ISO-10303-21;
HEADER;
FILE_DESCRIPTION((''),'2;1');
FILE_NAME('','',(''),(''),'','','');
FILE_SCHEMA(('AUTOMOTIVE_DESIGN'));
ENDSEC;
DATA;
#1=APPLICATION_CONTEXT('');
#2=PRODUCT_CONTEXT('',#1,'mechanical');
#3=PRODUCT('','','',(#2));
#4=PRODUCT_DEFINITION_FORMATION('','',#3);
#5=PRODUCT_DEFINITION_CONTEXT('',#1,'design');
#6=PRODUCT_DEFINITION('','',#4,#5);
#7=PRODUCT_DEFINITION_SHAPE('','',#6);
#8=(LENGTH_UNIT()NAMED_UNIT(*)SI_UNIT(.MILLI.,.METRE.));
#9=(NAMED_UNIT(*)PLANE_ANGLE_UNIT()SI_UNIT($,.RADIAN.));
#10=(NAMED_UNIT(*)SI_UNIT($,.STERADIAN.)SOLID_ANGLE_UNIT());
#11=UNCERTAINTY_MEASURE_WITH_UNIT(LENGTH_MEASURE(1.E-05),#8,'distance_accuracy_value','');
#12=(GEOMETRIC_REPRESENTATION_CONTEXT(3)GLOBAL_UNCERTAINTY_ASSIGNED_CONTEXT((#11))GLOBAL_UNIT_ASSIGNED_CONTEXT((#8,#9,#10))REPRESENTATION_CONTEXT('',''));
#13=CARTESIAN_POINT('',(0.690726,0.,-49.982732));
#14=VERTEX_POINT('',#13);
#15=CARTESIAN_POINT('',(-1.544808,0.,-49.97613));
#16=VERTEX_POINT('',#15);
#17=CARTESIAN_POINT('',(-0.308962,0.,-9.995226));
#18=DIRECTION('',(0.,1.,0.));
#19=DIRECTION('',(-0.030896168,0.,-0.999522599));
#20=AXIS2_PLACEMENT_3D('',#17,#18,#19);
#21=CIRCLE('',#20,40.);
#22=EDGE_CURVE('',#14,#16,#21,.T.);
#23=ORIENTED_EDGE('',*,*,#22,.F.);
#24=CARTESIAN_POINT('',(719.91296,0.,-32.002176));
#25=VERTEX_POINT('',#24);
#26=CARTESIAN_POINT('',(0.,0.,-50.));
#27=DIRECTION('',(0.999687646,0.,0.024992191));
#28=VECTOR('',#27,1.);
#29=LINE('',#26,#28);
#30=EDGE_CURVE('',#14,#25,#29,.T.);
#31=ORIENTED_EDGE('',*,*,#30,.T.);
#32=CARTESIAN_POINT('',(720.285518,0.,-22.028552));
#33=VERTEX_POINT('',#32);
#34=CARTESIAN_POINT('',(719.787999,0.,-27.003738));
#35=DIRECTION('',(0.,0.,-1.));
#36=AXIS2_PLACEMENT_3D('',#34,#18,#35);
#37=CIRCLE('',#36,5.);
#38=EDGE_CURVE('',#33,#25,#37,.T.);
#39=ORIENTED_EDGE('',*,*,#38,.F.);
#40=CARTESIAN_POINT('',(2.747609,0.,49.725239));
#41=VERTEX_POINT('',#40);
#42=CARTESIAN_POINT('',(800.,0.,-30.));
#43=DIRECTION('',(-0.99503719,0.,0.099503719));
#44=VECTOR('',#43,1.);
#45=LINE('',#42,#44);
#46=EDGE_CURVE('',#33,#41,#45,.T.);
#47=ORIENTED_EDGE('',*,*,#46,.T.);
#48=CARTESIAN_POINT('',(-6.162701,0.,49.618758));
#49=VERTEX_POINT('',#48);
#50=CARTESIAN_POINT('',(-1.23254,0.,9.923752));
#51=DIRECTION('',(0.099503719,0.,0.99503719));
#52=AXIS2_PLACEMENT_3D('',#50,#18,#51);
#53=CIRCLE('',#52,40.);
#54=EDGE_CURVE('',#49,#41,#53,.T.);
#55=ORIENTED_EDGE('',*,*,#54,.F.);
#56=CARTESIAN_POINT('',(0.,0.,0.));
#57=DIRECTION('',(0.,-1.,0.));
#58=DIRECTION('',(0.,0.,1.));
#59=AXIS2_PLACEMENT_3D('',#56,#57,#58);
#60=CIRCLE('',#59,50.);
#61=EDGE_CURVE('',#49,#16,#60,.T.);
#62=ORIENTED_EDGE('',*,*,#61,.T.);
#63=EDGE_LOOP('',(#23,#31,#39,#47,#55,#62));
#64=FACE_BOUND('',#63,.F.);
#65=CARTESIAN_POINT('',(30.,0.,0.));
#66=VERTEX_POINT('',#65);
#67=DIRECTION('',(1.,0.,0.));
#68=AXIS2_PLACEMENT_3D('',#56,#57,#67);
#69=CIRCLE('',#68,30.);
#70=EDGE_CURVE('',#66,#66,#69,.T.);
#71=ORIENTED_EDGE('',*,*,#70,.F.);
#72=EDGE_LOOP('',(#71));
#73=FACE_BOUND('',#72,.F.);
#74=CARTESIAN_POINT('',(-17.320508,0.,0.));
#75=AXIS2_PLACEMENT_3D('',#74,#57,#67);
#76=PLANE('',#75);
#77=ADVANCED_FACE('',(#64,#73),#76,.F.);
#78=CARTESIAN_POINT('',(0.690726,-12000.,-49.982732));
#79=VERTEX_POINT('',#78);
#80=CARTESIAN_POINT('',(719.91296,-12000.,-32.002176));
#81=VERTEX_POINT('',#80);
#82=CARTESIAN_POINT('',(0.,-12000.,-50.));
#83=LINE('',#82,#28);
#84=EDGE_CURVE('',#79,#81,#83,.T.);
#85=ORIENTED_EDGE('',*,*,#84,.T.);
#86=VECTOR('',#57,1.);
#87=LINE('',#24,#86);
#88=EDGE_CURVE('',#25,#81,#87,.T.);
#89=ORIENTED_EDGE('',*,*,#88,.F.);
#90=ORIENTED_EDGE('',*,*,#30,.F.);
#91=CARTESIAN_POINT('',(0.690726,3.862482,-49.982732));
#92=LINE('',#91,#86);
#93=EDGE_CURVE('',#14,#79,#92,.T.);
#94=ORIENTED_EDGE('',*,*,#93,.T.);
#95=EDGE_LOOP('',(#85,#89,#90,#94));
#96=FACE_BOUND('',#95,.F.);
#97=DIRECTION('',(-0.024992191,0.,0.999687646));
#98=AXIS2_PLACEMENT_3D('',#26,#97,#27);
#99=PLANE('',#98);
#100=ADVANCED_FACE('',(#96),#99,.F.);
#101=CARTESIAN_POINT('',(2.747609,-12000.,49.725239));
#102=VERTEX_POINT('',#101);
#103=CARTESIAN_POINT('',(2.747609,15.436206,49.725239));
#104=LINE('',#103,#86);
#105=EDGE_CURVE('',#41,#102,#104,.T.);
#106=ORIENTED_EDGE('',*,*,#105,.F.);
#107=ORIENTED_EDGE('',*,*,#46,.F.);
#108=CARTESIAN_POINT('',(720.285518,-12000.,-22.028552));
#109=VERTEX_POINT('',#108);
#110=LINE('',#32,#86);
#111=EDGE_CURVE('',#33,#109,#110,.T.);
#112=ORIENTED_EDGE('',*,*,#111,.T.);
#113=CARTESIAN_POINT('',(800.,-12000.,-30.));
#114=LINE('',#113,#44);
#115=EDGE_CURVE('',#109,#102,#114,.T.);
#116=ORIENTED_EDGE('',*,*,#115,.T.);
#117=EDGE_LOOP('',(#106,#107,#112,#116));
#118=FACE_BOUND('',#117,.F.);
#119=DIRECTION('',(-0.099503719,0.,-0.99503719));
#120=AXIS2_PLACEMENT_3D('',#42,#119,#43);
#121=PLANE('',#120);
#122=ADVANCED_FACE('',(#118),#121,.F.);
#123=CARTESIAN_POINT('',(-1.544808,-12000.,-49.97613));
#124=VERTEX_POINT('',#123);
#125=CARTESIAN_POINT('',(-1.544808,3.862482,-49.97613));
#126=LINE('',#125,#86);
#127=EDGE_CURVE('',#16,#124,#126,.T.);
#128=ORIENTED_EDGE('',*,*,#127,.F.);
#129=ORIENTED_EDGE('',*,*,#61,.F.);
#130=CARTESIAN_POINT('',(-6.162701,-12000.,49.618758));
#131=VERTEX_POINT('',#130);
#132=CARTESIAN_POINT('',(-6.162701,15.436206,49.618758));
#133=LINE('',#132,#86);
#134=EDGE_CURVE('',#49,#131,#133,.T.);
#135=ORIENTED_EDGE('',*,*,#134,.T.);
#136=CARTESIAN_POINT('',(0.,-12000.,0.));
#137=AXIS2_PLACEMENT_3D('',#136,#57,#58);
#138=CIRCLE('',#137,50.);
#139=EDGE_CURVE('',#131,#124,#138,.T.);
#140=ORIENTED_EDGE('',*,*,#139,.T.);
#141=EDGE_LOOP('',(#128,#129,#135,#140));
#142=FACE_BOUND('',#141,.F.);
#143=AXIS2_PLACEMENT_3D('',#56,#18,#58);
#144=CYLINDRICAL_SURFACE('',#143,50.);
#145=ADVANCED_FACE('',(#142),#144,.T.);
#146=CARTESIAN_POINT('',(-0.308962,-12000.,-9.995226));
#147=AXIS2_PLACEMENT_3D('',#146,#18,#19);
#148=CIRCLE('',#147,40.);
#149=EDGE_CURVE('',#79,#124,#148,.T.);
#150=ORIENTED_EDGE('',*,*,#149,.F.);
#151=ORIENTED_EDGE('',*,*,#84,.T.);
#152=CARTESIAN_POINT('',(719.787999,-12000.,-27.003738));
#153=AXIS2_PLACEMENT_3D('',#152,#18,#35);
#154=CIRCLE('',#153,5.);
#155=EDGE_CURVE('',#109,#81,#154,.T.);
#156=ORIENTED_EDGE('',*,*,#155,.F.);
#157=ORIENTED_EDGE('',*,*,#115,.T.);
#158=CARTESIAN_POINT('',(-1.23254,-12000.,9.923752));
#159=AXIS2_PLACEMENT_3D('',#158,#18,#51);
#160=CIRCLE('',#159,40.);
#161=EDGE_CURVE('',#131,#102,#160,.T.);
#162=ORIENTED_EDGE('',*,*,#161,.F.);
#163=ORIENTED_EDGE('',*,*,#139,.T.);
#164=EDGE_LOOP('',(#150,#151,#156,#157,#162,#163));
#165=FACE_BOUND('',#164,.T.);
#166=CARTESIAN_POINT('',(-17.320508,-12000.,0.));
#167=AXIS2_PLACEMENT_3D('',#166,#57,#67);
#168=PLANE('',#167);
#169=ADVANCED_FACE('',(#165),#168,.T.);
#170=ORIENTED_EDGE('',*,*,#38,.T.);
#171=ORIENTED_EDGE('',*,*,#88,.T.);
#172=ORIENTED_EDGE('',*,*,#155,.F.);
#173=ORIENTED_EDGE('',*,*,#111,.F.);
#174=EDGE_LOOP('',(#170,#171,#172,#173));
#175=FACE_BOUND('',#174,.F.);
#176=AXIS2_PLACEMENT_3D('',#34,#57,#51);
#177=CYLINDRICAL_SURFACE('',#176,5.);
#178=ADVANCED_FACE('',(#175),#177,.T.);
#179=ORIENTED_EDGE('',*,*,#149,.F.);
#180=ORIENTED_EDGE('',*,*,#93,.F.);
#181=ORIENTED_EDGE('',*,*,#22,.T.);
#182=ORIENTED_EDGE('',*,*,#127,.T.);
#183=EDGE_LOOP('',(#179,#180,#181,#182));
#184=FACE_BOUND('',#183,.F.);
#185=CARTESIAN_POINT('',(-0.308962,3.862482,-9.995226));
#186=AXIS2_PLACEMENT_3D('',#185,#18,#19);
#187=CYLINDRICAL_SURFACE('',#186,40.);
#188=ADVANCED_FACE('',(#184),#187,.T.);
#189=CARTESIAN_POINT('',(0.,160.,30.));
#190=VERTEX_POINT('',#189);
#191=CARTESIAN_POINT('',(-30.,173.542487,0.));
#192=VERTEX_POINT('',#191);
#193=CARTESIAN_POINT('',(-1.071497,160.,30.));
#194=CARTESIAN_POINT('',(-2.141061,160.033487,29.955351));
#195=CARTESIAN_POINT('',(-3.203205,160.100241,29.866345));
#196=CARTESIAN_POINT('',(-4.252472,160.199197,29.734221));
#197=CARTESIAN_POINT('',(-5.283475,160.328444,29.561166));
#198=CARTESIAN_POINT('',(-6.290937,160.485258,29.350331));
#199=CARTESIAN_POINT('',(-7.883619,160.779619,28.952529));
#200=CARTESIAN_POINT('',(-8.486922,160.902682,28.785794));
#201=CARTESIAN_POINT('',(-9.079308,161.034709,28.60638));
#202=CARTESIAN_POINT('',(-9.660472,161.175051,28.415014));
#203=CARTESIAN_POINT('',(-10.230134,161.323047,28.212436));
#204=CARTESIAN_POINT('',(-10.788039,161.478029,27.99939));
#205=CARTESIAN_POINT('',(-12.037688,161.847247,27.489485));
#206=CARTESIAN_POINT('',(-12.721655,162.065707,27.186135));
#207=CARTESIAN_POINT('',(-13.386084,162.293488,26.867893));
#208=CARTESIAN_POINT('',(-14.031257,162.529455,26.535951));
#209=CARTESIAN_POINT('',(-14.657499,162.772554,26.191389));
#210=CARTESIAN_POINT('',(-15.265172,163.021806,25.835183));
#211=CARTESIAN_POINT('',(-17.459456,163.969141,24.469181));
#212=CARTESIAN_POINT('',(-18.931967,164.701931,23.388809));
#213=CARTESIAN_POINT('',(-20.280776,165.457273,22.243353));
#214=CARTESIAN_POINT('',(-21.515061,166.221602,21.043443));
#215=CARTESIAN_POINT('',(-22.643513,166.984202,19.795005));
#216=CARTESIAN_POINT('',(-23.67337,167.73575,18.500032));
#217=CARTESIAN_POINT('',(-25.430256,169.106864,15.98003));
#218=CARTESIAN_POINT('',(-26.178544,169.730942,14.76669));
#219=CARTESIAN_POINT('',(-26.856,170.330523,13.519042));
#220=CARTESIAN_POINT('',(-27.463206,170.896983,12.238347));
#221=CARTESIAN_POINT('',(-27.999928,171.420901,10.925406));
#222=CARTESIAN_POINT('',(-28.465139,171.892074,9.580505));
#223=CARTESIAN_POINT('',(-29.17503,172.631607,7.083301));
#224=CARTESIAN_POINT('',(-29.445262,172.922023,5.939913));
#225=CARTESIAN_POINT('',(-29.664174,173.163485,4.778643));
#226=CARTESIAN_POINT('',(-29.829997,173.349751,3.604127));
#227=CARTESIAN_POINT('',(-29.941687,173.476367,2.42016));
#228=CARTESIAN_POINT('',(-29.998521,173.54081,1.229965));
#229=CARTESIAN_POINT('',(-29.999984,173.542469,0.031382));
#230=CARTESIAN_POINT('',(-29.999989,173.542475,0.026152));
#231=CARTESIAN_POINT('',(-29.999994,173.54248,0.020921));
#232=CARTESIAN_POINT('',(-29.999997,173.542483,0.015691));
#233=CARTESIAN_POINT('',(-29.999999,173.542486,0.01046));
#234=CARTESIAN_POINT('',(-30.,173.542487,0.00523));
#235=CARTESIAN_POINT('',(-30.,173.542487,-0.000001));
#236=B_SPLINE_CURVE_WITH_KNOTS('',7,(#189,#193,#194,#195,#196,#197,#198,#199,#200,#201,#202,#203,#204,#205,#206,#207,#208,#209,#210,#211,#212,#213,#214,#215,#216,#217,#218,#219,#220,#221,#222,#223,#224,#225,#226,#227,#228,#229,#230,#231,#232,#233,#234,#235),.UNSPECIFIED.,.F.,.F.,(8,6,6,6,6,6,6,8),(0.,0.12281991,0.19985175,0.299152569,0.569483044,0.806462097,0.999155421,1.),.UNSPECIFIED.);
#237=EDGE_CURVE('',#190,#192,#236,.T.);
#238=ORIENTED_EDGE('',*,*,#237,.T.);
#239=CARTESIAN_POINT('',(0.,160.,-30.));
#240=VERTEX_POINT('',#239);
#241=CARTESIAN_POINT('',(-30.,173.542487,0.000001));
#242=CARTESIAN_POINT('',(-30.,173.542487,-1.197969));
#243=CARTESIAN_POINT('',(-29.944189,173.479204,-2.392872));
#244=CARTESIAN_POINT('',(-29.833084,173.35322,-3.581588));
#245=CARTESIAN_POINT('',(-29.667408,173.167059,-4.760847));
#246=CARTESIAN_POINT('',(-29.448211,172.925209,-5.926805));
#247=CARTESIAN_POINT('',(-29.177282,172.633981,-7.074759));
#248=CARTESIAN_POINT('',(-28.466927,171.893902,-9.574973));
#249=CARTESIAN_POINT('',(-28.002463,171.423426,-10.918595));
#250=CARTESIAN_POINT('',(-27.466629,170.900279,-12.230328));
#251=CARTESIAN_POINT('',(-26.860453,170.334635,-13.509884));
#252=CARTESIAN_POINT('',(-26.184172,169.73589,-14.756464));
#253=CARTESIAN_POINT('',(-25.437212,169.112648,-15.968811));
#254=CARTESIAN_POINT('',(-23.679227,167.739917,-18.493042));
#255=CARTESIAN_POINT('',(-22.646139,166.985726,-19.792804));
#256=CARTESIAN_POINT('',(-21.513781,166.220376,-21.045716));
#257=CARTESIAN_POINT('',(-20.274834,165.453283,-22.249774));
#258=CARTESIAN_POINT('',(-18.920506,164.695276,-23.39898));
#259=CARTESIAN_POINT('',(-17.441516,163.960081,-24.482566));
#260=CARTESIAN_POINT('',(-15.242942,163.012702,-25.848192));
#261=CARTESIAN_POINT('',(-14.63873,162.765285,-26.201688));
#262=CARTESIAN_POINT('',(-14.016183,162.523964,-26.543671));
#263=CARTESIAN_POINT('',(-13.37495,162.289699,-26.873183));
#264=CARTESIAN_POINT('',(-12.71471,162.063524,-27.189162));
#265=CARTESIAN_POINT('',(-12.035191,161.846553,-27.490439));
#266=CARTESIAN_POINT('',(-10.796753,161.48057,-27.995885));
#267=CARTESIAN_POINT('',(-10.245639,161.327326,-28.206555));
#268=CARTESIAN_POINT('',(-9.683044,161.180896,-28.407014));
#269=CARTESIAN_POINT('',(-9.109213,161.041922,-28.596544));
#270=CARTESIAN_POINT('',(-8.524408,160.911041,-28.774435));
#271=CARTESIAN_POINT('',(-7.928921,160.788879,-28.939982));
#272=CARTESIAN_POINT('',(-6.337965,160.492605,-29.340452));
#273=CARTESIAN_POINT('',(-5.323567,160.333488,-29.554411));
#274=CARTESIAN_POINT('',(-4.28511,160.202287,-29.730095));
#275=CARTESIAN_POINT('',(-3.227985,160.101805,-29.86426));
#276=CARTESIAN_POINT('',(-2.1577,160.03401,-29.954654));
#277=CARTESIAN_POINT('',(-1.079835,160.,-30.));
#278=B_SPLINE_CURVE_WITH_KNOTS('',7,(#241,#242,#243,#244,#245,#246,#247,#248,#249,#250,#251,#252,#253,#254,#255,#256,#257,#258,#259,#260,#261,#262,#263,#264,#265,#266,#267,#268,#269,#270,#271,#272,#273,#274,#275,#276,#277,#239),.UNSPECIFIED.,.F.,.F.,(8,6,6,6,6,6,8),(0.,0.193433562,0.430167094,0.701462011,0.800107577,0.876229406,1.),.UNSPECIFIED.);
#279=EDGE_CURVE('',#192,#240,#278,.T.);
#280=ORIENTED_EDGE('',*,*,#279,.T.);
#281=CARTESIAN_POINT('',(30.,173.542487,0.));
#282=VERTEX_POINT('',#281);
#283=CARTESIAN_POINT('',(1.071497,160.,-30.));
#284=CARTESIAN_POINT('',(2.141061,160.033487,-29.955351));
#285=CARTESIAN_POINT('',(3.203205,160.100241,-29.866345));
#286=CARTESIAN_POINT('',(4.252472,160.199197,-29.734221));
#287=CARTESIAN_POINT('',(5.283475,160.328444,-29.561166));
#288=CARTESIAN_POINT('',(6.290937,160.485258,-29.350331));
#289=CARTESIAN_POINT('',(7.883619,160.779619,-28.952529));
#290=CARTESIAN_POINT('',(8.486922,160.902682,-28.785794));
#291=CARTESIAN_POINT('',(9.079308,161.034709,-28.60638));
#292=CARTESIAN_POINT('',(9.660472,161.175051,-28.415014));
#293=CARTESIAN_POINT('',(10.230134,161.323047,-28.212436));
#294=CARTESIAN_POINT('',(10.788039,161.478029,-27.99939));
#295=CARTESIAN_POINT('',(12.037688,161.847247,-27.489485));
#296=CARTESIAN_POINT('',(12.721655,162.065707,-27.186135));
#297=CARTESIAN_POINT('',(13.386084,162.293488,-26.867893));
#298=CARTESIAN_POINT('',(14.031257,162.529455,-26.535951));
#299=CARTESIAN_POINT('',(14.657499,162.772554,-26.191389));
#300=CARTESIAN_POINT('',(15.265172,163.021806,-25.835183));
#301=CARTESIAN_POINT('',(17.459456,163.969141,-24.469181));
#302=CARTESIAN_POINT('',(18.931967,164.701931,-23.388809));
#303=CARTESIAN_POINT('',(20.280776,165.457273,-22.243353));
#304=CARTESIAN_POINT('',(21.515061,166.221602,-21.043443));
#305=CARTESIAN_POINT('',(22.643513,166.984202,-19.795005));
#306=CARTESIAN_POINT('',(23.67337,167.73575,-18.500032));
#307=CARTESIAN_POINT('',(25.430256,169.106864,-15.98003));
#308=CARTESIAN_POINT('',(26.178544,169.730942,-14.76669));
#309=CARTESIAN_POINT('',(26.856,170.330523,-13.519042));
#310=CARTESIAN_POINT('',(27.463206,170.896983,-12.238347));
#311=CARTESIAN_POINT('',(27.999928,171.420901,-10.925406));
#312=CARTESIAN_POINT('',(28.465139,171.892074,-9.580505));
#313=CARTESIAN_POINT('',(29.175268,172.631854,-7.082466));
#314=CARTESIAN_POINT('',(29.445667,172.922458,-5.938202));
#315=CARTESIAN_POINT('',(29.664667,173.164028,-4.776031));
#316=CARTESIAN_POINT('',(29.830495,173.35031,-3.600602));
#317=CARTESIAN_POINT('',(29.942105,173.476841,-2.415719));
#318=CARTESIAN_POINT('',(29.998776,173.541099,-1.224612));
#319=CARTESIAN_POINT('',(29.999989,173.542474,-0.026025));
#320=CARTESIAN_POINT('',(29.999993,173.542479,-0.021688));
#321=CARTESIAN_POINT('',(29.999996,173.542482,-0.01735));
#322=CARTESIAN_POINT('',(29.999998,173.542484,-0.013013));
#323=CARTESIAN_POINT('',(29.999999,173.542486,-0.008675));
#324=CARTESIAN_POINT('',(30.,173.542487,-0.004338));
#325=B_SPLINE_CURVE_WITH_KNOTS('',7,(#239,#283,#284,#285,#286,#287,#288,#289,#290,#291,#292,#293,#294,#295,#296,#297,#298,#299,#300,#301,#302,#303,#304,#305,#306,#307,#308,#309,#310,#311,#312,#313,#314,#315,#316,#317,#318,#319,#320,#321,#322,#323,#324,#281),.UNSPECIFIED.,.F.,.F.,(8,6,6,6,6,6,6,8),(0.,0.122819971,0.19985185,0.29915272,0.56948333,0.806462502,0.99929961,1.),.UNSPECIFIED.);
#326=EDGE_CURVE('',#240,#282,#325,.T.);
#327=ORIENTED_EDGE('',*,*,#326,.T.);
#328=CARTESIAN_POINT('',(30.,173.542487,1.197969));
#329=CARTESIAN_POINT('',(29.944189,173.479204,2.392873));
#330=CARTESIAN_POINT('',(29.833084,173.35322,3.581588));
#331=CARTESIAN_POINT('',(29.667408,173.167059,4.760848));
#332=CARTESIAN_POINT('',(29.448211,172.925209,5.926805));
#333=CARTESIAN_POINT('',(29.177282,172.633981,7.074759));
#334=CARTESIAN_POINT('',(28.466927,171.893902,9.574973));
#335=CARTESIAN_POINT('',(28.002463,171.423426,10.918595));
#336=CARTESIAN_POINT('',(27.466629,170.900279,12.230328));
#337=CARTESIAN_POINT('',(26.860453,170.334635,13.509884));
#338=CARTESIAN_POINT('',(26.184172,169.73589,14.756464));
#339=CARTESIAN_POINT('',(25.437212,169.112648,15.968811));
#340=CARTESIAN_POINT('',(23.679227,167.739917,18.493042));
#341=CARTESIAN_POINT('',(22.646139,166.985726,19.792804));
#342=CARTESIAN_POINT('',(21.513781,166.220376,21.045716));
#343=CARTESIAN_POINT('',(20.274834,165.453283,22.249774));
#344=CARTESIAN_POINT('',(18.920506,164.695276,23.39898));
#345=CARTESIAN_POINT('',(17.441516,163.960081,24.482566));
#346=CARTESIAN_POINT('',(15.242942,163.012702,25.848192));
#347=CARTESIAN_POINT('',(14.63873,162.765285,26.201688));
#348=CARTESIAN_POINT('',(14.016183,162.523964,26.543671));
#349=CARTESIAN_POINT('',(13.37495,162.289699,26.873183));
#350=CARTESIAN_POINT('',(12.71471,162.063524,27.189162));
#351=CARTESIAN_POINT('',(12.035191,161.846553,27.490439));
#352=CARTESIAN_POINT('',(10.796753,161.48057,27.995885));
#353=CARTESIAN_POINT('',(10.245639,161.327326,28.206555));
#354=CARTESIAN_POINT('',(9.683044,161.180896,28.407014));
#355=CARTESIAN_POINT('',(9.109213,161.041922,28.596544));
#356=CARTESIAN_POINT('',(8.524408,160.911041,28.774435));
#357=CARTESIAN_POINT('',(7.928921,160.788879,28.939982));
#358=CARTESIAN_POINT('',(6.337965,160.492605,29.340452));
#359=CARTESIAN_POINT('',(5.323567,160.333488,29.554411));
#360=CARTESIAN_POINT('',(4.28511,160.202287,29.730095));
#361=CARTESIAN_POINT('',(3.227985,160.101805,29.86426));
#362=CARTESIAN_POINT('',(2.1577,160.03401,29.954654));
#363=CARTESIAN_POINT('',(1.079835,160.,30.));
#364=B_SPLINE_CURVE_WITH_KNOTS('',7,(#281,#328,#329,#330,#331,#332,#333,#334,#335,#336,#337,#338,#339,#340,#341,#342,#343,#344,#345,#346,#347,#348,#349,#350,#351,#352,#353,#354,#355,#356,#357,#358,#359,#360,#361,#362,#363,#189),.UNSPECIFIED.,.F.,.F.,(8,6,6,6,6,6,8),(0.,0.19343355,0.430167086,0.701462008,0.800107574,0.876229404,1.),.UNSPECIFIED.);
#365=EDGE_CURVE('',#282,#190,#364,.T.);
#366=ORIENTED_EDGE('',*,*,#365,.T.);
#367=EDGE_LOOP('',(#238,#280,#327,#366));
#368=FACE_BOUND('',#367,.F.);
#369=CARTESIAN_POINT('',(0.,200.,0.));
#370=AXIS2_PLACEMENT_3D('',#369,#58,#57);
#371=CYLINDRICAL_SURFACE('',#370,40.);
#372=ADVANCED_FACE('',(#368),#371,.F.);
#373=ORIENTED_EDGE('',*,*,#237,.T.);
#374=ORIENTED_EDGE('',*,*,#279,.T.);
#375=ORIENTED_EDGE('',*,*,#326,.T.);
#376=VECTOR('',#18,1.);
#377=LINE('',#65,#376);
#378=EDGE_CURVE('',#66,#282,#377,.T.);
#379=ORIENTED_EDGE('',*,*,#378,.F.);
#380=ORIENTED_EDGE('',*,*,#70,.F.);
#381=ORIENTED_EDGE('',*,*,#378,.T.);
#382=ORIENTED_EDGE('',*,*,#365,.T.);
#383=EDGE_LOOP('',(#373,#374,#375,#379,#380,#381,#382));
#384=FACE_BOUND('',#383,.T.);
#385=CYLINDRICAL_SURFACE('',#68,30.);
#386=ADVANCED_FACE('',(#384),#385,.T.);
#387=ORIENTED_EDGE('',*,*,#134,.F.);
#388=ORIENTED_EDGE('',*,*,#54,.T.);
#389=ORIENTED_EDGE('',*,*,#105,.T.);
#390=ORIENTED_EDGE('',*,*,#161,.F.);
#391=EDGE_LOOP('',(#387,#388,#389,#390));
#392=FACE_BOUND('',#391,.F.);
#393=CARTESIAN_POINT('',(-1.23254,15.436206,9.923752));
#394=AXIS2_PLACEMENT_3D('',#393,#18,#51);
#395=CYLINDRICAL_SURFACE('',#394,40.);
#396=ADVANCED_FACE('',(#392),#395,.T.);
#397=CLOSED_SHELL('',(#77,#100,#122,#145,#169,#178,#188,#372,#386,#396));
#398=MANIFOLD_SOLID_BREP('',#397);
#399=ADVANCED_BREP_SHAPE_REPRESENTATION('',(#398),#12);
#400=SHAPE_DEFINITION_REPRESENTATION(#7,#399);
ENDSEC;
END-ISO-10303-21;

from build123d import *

# Parameters (mm, degrees)
F1_DEPTH    = 12000
F2_T1_DEPTH = 12030.8724111993
F2_T3_DEPTH = 12007.7249640069
F3_R        = 5
F4_R        = 30
F5_DEPTH    = 200
F7_DEPTH    = 50


# Not quite as in the source:
# - a fillet or chamfer that OpenCascade refuses, or shapes differently, is made with other operations: its cross-section is extruded or revolved along the edge and cut away or added


with BuildPart() as f1:
    # F0 (on Front) → F1 (new body)
    with BuildSketch(Plane.XZ):
        with BuildLine():
            Line((0, -30), (0, 50))
            ThreePointArc((0, 50), (-50, 0), (0, -50))
            Line((0, -50), (0, -30))
        make_face()
        Polygon((800, -30), (0, 50), (0, -30), align=None)
        Polygon((800, -30), (0, -30), (0, -50), align=None)
    extrude(amount=F1_DEPTH)

    # F2: fillet of radius 40 on 2 edges, made by hand

    # F2_s2 → F2_t1 (cut)
    with BuildSketch(Plane.XZ.offset(-15.4362055996)):
        with BuildLine():
            ThreePointArc((2.7476085346, 49.7252391465), (-1.7105207108, 49.9208956194), (-6.1627011311, 49.6187576907))
            ThreePointArc((-6.1627011311, 49.6187576907), (-3.0872411199, 49.904598408), (0, 50))
            Line((0, 50), (2.7476085346, 49.7252391465))
        make_face()
    extrude(amount=F2_T1_DEPTH, mode=Mode.SUBTRACT)

    # F2_s4 → F2_t3 (cut)
    with BuildSketch(Plane.XZ.offset(-3.8624820034)):
        with BuildLine():
            ThreePointArc((-1.5448083953, -49.9761299724), (-0.4270873442, -49.9950515732), (0.6907259674, -49.9827318508))
            Line((0.6907259674, -49.9827318508), (0, -50))
            ThreePointArc((0, -50), (-0.7724964007, -49.994032137), (-1.5448083953, -49.9761299724))
        make_face()
    extrude(amount=F2_T3_DEPTH, mode=Mode.SUBTRACT)

    # F3
    f3_edges = [f1.edges().sort_by_distance(p)[0] for p in [
        (800, -6000, -30),
    ]]
    fillet(f3_edges, radius=F3_R)

    # F4 (on Front) → F5 (join)
    with BuildSketch(Plane.XZ):
        Circle(F4_R)
    extrude(amount=-F5_DEPTH)

    # F6 (on Top) → F7 (cut, symmetric)
    with BuildSketch(Plane.XY):
        with BuildLine():
            ThreePointArc((0, 160), (28.2842712475, 171.7157287525), (40, 200))
            ThreePointArc((40, 200), (-28.2842712475, 228.2842712475), (0, 160))
        make_face()
    extrude(amount=F7_DEPTH, both=True, mode=Mode.SUBTRACT)


solid = f1.part
